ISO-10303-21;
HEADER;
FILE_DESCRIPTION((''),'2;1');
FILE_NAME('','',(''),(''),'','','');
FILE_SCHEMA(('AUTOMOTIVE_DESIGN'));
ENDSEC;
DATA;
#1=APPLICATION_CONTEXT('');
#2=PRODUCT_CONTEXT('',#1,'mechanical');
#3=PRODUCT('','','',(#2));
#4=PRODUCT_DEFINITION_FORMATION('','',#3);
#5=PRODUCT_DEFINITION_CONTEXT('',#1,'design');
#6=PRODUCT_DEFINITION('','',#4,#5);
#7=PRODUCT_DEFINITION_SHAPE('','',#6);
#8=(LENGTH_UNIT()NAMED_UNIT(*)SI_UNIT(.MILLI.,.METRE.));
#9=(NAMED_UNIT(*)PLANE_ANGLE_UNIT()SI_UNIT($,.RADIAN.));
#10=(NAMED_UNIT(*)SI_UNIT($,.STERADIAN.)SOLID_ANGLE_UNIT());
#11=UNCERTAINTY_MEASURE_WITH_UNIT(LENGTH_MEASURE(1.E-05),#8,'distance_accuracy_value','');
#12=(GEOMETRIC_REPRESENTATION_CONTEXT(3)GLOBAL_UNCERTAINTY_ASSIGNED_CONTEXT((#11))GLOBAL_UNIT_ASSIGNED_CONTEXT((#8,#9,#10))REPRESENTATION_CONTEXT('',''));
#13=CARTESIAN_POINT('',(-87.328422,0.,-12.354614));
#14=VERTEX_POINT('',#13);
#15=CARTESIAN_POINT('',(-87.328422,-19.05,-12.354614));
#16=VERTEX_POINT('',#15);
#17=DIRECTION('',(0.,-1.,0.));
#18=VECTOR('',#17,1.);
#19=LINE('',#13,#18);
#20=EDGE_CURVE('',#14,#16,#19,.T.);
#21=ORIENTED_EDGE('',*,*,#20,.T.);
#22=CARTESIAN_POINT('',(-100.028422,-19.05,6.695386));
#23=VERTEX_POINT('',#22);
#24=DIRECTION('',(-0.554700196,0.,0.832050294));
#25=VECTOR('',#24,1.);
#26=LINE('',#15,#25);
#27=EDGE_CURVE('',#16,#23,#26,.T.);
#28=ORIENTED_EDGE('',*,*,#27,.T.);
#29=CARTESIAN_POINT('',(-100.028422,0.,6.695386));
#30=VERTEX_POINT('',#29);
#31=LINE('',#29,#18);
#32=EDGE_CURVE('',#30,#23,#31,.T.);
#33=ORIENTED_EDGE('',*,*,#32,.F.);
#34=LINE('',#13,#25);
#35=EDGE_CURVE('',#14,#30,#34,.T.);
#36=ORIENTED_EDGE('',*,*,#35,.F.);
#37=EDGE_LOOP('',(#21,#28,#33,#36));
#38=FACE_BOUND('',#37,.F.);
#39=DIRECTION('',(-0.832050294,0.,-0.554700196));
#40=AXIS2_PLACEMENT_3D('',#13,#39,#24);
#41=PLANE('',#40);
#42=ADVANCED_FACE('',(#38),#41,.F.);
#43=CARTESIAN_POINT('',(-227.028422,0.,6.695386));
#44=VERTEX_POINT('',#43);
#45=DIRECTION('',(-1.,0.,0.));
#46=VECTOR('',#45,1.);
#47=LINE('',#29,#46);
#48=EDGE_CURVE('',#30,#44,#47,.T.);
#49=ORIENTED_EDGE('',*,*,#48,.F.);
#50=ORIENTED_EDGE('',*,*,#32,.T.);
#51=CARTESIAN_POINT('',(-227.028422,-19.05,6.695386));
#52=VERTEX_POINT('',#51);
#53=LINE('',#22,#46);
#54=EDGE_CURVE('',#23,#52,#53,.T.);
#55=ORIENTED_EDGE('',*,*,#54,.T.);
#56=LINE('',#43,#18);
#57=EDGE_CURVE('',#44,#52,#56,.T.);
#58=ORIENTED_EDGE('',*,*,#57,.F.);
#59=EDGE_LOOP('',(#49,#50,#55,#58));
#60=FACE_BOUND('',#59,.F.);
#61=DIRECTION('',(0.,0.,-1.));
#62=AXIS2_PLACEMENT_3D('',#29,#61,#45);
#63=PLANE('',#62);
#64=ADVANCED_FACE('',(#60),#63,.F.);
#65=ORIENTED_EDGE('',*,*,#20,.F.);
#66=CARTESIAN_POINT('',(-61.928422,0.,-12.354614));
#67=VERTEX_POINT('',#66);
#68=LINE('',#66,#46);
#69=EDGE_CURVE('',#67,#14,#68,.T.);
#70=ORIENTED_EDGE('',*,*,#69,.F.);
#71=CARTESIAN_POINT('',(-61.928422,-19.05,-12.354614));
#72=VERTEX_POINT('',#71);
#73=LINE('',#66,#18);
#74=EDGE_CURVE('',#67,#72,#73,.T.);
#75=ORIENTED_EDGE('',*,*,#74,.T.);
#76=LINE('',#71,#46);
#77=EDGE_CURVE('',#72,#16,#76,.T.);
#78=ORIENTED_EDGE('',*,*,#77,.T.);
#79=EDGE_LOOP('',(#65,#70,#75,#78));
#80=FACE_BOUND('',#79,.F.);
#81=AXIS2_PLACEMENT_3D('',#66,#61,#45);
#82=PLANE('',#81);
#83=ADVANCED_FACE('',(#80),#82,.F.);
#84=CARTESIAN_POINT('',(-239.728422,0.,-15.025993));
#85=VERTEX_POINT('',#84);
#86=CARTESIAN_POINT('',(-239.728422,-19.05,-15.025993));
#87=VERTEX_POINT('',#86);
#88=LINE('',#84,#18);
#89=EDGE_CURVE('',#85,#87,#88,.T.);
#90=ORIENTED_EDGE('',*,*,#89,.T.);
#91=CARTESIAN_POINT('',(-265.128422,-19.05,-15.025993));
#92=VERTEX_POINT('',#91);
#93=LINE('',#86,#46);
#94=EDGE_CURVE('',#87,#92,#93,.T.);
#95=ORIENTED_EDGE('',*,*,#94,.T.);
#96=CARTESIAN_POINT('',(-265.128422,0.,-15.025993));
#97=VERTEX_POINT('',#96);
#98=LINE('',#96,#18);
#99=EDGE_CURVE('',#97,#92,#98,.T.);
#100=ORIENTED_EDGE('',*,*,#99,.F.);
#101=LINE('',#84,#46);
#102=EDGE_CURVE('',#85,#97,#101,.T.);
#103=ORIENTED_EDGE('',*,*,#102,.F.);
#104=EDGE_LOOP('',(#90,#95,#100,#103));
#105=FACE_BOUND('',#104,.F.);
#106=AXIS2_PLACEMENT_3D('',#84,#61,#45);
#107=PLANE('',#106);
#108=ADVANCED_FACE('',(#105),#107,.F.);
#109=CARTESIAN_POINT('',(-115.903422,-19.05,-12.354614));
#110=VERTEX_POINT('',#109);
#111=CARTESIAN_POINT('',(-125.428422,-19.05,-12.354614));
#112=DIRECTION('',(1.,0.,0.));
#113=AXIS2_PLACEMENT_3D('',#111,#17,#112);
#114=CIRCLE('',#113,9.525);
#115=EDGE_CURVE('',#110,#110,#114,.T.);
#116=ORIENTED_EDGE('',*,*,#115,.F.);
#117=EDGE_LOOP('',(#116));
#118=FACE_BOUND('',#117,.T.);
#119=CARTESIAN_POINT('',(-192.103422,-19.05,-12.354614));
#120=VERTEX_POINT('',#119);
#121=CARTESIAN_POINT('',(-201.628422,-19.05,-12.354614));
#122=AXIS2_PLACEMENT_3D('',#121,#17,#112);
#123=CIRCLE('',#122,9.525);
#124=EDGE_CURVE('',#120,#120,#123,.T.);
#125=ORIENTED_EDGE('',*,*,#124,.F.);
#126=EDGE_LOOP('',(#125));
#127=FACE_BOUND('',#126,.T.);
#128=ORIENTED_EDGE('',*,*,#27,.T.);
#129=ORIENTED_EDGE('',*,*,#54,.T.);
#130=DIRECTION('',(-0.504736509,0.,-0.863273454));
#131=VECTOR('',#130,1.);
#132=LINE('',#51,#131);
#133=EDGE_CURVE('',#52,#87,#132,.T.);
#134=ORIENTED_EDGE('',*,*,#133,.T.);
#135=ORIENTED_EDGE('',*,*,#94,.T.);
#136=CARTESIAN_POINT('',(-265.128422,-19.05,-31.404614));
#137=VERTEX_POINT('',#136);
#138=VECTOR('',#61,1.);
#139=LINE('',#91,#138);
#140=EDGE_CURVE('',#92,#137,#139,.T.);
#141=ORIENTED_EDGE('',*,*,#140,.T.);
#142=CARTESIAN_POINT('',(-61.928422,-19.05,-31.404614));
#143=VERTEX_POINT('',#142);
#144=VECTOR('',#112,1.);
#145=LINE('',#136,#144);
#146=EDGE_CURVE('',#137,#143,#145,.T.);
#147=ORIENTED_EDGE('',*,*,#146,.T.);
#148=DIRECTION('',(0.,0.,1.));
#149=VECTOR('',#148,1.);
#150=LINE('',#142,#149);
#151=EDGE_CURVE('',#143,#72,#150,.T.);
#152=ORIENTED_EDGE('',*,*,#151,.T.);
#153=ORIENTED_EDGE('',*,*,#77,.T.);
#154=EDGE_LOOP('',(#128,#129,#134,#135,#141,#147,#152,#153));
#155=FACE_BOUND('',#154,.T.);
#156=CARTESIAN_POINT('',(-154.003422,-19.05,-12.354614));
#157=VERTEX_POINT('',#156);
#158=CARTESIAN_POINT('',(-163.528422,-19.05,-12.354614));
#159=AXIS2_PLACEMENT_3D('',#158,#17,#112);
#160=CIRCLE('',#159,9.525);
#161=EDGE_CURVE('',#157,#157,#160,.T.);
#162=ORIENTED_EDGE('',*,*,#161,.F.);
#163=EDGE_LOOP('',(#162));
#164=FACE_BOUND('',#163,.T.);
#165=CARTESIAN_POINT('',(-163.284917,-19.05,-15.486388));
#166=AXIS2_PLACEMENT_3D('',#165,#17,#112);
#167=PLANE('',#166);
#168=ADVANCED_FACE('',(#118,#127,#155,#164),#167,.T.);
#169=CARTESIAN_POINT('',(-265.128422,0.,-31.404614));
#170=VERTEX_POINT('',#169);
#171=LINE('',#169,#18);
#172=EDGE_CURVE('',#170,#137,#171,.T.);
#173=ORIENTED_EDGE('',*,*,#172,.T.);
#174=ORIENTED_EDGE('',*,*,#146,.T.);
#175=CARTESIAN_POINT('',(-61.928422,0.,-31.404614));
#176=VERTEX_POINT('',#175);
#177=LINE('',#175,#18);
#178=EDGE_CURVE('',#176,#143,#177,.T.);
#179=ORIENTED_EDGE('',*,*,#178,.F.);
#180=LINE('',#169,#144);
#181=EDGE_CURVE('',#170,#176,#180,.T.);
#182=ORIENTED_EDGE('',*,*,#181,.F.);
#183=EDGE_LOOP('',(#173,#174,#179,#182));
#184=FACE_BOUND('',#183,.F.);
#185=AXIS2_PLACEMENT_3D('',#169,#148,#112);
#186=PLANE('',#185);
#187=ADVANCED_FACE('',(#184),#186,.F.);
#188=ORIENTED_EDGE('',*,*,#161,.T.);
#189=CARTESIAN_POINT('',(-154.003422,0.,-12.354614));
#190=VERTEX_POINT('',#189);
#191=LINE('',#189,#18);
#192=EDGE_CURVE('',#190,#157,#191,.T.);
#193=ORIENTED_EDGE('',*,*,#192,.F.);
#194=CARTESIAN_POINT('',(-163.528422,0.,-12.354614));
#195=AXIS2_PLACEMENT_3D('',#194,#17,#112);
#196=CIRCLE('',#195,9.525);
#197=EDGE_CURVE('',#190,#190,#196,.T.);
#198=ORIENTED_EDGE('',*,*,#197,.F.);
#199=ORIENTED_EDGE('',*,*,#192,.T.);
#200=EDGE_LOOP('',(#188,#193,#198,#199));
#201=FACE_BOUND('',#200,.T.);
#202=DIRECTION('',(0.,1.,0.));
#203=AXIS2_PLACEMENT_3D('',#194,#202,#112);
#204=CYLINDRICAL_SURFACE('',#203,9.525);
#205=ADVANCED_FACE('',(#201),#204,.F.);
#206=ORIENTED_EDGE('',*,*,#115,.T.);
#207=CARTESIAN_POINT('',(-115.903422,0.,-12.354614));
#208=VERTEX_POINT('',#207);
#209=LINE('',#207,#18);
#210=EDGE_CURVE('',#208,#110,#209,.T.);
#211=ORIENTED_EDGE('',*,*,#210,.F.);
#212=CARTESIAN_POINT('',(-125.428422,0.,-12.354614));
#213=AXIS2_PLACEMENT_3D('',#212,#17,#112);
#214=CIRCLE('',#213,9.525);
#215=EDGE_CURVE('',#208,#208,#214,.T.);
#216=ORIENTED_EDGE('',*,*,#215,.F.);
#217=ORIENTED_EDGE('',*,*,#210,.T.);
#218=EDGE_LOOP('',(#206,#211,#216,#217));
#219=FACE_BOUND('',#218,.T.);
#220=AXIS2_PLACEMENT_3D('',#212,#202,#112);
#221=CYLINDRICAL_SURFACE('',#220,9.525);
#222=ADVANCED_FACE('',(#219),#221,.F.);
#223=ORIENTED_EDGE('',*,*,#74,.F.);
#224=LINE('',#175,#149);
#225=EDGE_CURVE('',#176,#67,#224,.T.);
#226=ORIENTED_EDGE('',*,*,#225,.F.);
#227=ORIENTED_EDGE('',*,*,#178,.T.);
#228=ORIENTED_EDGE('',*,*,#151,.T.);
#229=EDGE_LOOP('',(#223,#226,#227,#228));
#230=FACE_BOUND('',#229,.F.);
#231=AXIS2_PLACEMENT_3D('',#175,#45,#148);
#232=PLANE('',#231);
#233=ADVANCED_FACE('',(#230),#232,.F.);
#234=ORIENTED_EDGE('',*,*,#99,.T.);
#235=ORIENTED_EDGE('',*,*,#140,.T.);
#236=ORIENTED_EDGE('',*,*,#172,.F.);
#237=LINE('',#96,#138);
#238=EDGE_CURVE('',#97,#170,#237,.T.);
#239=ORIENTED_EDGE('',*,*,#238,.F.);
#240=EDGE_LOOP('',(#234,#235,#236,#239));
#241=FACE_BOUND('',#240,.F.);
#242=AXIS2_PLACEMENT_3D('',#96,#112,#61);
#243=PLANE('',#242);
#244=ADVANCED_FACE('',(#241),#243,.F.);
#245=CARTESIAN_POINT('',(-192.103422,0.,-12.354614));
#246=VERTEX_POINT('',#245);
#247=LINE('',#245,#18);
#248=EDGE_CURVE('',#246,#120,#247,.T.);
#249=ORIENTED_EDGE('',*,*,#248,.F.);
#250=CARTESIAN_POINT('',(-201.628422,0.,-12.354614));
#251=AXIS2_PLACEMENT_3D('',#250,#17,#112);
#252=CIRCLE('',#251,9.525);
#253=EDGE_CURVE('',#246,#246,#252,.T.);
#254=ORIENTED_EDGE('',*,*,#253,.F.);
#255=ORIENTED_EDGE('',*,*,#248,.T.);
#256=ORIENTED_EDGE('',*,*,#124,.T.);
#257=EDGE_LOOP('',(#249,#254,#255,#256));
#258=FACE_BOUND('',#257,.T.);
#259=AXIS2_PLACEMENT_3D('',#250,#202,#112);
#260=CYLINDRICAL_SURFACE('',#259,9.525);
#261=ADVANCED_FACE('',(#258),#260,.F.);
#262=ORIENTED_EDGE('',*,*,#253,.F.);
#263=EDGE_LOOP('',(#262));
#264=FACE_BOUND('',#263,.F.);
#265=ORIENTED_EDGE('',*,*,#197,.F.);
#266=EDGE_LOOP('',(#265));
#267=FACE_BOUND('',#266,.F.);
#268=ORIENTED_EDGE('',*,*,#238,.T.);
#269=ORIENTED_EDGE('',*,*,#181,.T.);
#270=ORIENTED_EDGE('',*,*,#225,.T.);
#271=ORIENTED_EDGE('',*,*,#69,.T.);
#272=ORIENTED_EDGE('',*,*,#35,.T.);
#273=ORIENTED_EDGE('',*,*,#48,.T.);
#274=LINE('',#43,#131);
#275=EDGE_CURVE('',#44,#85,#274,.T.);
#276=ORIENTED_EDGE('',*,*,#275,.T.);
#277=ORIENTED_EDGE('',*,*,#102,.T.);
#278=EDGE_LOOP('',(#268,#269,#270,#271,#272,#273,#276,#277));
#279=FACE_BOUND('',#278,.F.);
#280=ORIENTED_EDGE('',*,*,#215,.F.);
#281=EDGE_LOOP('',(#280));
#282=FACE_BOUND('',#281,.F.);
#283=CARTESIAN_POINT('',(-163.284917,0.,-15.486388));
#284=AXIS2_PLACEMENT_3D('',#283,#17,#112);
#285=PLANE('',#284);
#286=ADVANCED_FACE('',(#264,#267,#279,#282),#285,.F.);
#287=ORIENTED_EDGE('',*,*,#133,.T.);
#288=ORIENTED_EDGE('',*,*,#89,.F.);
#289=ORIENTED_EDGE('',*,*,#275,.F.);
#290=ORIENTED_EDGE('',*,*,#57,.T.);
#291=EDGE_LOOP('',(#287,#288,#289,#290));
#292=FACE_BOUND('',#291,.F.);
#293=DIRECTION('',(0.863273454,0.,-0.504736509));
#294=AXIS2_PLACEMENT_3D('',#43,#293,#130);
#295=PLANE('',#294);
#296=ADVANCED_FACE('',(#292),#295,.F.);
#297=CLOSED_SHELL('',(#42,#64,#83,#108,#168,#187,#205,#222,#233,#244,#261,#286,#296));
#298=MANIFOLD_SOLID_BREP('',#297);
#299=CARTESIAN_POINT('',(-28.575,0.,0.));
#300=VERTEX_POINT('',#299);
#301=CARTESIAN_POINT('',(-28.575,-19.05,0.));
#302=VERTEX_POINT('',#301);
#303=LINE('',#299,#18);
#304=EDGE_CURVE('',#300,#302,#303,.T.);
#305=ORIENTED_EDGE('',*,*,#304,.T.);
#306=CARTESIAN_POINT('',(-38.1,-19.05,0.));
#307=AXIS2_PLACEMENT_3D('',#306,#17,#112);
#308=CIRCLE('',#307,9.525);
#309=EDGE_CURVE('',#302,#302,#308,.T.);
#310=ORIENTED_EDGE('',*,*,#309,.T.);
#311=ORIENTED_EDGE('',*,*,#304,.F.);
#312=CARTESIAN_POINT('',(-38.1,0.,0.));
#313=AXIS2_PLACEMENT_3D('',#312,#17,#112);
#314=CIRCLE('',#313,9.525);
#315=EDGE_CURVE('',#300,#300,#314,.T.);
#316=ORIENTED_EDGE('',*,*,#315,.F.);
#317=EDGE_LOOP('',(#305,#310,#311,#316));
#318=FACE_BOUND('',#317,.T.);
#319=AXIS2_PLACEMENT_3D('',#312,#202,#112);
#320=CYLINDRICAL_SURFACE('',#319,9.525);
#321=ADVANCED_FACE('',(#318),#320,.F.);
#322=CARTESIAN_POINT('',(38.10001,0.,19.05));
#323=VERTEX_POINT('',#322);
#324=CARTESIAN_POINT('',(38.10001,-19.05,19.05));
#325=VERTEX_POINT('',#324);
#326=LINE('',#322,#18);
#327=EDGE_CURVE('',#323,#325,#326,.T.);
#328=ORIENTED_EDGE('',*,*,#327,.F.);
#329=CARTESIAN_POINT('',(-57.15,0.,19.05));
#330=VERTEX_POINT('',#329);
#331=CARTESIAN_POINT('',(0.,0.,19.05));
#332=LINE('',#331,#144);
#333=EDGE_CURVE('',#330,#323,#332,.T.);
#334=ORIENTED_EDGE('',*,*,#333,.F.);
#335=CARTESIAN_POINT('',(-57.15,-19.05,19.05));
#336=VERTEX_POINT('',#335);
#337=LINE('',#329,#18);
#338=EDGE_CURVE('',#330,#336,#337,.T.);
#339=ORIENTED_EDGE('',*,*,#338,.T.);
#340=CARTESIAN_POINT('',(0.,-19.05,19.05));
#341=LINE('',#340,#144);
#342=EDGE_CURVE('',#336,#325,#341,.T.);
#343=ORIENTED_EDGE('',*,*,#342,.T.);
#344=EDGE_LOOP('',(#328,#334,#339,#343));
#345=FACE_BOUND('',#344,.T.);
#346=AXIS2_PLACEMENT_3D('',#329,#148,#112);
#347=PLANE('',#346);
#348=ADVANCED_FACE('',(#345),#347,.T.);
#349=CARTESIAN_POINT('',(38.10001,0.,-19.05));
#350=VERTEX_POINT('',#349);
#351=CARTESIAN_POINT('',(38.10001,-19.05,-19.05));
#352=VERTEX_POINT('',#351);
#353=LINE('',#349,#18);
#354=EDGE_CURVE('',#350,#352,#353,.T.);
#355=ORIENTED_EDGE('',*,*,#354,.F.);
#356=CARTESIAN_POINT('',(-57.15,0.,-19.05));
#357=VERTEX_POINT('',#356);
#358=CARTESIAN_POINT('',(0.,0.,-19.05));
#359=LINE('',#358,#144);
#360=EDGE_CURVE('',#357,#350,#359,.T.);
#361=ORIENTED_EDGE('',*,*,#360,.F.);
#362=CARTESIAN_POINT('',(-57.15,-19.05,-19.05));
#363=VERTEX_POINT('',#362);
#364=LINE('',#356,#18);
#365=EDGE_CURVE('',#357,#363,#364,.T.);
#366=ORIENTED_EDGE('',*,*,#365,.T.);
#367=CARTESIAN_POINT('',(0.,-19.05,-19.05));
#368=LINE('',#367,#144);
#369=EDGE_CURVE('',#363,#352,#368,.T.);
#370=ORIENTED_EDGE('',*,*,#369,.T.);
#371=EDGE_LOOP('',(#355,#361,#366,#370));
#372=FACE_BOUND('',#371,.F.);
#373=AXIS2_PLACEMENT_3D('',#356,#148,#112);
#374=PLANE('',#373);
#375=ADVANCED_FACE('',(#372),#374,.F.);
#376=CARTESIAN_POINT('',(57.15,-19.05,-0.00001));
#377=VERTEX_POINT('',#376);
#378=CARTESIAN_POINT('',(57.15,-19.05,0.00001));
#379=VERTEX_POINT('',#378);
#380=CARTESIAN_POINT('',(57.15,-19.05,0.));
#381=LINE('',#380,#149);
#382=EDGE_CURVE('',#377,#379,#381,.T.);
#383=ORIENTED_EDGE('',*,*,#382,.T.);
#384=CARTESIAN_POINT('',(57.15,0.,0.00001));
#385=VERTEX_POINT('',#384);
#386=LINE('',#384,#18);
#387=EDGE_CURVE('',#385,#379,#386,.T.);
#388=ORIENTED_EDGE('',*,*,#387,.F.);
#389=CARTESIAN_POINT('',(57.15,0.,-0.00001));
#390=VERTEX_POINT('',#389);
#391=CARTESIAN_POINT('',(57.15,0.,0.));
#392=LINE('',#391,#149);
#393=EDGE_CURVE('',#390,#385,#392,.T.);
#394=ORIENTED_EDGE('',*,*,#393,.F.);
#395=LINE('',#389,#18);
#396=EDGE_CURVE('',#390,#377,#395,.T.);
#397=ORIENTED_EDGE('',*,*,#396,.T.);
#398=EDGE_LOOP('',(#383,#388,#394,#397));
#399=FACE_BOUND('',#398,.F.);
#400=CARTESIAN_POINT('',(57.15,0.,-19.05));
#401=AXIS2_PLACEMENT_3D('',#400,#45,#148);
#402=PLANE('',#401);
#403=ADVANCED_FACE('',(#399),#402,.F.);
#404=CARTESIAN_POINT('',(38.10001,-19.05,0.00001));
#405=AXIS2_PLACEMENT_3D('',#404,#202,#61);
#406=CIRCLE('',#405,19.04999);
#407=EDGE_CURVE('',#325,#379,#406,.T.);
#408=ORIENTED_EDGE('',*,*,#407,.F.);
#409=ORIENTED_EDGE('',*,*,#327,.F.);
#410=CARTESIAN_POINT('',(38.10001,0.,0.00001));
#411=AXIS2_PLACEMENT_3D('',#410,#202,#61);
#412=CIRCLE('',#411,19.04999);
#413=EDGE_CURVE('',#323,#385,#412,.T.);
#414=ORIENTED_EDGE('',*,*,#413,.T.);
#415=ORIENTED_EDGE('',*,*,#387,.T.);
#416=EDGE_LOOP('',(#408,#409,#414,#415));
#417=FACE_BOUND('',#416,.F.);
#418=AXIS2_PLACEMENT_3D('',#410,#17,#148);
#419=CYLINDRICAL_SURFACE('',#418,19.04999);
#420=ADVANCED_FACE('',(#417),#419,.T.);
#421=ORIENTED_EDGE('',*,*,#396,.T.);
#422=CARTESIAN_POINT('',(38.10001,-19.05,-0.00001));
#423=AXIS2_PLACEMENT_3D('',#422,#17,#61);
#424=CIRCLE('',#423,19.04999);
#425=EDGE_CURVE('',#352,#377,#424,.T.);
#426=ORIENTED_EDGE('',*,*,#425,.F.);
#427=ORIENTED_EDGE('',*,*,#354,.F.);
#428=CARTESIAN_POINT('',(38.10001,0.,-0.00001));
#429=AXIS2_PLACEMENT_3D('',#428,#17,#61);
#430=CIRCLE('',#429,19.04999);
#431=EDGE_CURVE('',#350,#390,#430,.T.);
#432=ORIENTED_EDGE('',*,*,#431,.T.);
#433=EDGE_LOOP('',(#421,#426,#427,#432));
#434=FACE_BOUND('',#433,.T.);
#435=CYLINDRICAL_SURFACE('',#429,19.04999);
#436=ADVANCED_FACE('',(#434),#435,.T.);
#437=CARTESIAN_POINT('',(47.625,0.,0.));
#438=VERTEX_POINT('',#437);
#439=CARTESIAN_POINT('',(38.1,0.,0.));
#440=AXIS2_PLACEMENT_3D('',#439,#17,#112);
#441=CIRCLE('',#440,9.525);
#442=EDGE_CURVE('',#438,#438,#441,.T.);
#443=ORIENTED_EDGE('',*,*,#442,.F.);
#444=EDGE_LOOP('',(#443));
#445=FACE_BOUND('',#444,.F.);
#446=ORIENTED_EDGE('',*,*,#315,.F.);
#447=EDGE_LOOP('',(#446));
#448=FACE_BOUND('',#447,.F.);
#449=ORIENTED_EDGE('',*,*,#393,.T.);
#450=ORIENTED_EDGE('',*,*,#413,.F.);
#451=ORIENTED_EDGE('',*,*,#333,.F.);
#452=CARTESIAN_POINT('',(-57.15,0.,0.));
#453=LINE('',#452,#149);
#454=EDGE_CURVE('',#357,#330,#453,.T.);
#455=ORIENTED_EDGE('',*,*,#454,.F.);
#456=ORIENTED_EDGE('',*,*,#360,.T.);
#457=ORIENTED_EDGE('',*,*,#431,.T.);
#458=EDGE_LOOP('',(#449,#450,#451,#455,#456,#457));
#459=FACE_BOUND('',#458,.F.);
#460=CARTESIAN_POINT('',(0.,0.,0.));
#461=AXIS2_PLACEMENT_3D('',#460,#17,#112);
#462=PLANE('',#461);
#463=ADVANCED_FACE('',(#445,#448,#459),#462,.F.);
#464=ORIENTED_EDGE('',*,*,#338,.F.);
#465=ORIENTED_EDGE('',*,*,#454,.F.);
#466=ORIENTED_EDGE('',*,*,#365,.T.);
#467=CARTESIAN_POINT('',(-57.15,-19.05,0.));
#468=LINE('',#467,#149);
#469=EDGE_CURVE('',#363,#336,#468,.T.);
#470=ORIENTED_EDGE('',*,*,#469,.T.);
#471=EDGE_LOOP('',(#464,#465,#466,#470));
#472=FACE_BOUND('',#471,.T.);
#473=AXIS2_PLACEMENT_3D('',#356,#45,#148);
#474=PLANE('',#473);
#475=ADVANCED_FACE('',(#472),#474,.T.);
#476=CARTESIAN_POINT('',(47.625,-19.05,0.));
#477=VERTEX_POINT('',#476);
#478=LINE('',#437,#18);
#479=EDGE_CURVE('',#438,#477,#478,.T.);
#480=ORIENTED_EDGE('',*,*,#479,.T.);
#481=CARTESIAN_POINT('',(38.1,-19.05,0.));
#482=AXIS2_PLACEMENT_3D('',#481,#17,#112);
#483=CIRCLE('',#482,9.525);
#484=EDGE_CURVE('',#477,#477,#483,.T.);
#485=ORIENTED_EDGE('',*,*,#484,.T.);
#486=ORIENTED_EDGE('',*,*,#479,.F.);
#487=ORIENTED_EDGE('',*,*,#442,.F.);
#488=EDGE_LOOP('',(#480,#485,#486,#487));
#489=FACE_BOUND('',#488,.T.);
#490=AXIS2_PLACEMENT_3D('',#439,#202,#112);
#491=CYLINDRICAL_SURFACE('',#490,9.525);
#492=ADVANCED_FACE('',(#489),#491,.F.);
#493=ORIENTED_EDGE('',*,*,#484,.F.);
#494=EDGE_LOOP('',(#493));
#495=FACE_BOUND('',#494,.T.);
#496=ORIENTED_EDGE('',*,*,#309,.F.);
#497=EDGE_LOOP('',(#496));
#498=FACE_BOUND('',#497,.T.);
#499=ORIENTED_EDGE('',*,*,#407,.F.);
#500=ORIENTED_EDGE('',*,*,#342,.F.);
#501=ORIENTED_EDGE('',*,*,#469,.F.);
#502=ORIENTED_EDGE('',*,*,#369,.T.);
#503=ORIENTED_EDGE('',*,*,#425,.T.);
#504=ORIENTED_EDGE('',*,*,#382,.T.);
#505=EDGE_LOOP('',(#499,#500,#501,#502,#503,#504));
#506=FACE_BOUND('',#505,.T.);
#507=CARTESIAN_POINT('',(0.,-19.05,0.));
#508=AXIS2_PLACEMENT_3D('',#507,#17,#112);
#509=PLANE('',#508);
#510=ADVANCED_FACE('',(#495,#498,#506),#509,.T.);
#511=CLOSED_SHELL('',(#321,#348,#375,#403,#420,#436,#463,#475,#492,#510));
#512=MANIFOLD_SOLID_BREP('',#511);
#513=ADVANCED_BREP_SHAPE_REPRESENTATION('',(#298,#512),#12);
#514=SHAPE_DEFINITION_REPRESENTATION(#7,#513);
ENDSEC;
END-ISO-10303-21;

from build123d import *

# Parameters (mm, degrees)
F0_W     = 114.3
F0_H     = 38.1
F0_R     = 9.525
F1_DEPTH = 19.05
F2_R     = 19.04999
F3_R     = 9.525
F4_DEPTH = 19.05


# Not quite as in the source:
# - a fillet or chamfer is up to 0.001 mm smaller than in the source, because OpenCascade refuses the exact size


with BuildPart() as f1:
    # F0 (on Front) → F1 (new body)
    with BuildSketch(Plane.XZ):
        Rectangle(F0_W, F0_H)
        with Locations((-38.1, 0)):
            Circle(F0_R, mode=Mode.SUBTRACT)
        with Locations((38.1, 0)):
            Circle(F0_R, mode=Mode.SUBTRACT)
    extrude(amount=F1_DEPTH)

    # F2 (radius 19.05 in the source; OpenCascade refuses exactly that, so slightly less here)
    f2_edges = [f1.edges().sort_by_distance(p)[0] for p in [
        (57.15, -9.525, 19.05),
        (57.15, -9.525, -19.05),
    ]]
    fillet(f2_edges, radius=F2_R)


with BuildPart() as f4:
    # F3 (on Front) → F4 (new body)
    with BuildSketch(Plane.XZ):
        Polygon((-100.0284222552, 6.6953860101), (-227.0284222552, 6.6953860101), (-239.7284222552, -15.025992686), (-265.1284222552, -15.025992686), (-265.1284222552, -31.4046139899), (-61.9284222552, -31.4046139899), (-61.9284222552, -12.3546139899), (-87.3284222552, -12.3546139899), align=None)
        with Locations((-201.6284222552, -12.3546139899)):
            Circle(F3_R, mode=Mode.SUBTRACT)
        with Locations((-163.5284222552, -12.3546139899)):
            Circle(F3_R, mode=Mode.SUBTRACT)
        with Locations((-125.4284222552, -12.3546139899)):
            Circle(F3_R, mode=Mode.SUBTRACT)
    extrude(amount=F4_DEPTH)


solid = Compound([f1.part, f4.part])
